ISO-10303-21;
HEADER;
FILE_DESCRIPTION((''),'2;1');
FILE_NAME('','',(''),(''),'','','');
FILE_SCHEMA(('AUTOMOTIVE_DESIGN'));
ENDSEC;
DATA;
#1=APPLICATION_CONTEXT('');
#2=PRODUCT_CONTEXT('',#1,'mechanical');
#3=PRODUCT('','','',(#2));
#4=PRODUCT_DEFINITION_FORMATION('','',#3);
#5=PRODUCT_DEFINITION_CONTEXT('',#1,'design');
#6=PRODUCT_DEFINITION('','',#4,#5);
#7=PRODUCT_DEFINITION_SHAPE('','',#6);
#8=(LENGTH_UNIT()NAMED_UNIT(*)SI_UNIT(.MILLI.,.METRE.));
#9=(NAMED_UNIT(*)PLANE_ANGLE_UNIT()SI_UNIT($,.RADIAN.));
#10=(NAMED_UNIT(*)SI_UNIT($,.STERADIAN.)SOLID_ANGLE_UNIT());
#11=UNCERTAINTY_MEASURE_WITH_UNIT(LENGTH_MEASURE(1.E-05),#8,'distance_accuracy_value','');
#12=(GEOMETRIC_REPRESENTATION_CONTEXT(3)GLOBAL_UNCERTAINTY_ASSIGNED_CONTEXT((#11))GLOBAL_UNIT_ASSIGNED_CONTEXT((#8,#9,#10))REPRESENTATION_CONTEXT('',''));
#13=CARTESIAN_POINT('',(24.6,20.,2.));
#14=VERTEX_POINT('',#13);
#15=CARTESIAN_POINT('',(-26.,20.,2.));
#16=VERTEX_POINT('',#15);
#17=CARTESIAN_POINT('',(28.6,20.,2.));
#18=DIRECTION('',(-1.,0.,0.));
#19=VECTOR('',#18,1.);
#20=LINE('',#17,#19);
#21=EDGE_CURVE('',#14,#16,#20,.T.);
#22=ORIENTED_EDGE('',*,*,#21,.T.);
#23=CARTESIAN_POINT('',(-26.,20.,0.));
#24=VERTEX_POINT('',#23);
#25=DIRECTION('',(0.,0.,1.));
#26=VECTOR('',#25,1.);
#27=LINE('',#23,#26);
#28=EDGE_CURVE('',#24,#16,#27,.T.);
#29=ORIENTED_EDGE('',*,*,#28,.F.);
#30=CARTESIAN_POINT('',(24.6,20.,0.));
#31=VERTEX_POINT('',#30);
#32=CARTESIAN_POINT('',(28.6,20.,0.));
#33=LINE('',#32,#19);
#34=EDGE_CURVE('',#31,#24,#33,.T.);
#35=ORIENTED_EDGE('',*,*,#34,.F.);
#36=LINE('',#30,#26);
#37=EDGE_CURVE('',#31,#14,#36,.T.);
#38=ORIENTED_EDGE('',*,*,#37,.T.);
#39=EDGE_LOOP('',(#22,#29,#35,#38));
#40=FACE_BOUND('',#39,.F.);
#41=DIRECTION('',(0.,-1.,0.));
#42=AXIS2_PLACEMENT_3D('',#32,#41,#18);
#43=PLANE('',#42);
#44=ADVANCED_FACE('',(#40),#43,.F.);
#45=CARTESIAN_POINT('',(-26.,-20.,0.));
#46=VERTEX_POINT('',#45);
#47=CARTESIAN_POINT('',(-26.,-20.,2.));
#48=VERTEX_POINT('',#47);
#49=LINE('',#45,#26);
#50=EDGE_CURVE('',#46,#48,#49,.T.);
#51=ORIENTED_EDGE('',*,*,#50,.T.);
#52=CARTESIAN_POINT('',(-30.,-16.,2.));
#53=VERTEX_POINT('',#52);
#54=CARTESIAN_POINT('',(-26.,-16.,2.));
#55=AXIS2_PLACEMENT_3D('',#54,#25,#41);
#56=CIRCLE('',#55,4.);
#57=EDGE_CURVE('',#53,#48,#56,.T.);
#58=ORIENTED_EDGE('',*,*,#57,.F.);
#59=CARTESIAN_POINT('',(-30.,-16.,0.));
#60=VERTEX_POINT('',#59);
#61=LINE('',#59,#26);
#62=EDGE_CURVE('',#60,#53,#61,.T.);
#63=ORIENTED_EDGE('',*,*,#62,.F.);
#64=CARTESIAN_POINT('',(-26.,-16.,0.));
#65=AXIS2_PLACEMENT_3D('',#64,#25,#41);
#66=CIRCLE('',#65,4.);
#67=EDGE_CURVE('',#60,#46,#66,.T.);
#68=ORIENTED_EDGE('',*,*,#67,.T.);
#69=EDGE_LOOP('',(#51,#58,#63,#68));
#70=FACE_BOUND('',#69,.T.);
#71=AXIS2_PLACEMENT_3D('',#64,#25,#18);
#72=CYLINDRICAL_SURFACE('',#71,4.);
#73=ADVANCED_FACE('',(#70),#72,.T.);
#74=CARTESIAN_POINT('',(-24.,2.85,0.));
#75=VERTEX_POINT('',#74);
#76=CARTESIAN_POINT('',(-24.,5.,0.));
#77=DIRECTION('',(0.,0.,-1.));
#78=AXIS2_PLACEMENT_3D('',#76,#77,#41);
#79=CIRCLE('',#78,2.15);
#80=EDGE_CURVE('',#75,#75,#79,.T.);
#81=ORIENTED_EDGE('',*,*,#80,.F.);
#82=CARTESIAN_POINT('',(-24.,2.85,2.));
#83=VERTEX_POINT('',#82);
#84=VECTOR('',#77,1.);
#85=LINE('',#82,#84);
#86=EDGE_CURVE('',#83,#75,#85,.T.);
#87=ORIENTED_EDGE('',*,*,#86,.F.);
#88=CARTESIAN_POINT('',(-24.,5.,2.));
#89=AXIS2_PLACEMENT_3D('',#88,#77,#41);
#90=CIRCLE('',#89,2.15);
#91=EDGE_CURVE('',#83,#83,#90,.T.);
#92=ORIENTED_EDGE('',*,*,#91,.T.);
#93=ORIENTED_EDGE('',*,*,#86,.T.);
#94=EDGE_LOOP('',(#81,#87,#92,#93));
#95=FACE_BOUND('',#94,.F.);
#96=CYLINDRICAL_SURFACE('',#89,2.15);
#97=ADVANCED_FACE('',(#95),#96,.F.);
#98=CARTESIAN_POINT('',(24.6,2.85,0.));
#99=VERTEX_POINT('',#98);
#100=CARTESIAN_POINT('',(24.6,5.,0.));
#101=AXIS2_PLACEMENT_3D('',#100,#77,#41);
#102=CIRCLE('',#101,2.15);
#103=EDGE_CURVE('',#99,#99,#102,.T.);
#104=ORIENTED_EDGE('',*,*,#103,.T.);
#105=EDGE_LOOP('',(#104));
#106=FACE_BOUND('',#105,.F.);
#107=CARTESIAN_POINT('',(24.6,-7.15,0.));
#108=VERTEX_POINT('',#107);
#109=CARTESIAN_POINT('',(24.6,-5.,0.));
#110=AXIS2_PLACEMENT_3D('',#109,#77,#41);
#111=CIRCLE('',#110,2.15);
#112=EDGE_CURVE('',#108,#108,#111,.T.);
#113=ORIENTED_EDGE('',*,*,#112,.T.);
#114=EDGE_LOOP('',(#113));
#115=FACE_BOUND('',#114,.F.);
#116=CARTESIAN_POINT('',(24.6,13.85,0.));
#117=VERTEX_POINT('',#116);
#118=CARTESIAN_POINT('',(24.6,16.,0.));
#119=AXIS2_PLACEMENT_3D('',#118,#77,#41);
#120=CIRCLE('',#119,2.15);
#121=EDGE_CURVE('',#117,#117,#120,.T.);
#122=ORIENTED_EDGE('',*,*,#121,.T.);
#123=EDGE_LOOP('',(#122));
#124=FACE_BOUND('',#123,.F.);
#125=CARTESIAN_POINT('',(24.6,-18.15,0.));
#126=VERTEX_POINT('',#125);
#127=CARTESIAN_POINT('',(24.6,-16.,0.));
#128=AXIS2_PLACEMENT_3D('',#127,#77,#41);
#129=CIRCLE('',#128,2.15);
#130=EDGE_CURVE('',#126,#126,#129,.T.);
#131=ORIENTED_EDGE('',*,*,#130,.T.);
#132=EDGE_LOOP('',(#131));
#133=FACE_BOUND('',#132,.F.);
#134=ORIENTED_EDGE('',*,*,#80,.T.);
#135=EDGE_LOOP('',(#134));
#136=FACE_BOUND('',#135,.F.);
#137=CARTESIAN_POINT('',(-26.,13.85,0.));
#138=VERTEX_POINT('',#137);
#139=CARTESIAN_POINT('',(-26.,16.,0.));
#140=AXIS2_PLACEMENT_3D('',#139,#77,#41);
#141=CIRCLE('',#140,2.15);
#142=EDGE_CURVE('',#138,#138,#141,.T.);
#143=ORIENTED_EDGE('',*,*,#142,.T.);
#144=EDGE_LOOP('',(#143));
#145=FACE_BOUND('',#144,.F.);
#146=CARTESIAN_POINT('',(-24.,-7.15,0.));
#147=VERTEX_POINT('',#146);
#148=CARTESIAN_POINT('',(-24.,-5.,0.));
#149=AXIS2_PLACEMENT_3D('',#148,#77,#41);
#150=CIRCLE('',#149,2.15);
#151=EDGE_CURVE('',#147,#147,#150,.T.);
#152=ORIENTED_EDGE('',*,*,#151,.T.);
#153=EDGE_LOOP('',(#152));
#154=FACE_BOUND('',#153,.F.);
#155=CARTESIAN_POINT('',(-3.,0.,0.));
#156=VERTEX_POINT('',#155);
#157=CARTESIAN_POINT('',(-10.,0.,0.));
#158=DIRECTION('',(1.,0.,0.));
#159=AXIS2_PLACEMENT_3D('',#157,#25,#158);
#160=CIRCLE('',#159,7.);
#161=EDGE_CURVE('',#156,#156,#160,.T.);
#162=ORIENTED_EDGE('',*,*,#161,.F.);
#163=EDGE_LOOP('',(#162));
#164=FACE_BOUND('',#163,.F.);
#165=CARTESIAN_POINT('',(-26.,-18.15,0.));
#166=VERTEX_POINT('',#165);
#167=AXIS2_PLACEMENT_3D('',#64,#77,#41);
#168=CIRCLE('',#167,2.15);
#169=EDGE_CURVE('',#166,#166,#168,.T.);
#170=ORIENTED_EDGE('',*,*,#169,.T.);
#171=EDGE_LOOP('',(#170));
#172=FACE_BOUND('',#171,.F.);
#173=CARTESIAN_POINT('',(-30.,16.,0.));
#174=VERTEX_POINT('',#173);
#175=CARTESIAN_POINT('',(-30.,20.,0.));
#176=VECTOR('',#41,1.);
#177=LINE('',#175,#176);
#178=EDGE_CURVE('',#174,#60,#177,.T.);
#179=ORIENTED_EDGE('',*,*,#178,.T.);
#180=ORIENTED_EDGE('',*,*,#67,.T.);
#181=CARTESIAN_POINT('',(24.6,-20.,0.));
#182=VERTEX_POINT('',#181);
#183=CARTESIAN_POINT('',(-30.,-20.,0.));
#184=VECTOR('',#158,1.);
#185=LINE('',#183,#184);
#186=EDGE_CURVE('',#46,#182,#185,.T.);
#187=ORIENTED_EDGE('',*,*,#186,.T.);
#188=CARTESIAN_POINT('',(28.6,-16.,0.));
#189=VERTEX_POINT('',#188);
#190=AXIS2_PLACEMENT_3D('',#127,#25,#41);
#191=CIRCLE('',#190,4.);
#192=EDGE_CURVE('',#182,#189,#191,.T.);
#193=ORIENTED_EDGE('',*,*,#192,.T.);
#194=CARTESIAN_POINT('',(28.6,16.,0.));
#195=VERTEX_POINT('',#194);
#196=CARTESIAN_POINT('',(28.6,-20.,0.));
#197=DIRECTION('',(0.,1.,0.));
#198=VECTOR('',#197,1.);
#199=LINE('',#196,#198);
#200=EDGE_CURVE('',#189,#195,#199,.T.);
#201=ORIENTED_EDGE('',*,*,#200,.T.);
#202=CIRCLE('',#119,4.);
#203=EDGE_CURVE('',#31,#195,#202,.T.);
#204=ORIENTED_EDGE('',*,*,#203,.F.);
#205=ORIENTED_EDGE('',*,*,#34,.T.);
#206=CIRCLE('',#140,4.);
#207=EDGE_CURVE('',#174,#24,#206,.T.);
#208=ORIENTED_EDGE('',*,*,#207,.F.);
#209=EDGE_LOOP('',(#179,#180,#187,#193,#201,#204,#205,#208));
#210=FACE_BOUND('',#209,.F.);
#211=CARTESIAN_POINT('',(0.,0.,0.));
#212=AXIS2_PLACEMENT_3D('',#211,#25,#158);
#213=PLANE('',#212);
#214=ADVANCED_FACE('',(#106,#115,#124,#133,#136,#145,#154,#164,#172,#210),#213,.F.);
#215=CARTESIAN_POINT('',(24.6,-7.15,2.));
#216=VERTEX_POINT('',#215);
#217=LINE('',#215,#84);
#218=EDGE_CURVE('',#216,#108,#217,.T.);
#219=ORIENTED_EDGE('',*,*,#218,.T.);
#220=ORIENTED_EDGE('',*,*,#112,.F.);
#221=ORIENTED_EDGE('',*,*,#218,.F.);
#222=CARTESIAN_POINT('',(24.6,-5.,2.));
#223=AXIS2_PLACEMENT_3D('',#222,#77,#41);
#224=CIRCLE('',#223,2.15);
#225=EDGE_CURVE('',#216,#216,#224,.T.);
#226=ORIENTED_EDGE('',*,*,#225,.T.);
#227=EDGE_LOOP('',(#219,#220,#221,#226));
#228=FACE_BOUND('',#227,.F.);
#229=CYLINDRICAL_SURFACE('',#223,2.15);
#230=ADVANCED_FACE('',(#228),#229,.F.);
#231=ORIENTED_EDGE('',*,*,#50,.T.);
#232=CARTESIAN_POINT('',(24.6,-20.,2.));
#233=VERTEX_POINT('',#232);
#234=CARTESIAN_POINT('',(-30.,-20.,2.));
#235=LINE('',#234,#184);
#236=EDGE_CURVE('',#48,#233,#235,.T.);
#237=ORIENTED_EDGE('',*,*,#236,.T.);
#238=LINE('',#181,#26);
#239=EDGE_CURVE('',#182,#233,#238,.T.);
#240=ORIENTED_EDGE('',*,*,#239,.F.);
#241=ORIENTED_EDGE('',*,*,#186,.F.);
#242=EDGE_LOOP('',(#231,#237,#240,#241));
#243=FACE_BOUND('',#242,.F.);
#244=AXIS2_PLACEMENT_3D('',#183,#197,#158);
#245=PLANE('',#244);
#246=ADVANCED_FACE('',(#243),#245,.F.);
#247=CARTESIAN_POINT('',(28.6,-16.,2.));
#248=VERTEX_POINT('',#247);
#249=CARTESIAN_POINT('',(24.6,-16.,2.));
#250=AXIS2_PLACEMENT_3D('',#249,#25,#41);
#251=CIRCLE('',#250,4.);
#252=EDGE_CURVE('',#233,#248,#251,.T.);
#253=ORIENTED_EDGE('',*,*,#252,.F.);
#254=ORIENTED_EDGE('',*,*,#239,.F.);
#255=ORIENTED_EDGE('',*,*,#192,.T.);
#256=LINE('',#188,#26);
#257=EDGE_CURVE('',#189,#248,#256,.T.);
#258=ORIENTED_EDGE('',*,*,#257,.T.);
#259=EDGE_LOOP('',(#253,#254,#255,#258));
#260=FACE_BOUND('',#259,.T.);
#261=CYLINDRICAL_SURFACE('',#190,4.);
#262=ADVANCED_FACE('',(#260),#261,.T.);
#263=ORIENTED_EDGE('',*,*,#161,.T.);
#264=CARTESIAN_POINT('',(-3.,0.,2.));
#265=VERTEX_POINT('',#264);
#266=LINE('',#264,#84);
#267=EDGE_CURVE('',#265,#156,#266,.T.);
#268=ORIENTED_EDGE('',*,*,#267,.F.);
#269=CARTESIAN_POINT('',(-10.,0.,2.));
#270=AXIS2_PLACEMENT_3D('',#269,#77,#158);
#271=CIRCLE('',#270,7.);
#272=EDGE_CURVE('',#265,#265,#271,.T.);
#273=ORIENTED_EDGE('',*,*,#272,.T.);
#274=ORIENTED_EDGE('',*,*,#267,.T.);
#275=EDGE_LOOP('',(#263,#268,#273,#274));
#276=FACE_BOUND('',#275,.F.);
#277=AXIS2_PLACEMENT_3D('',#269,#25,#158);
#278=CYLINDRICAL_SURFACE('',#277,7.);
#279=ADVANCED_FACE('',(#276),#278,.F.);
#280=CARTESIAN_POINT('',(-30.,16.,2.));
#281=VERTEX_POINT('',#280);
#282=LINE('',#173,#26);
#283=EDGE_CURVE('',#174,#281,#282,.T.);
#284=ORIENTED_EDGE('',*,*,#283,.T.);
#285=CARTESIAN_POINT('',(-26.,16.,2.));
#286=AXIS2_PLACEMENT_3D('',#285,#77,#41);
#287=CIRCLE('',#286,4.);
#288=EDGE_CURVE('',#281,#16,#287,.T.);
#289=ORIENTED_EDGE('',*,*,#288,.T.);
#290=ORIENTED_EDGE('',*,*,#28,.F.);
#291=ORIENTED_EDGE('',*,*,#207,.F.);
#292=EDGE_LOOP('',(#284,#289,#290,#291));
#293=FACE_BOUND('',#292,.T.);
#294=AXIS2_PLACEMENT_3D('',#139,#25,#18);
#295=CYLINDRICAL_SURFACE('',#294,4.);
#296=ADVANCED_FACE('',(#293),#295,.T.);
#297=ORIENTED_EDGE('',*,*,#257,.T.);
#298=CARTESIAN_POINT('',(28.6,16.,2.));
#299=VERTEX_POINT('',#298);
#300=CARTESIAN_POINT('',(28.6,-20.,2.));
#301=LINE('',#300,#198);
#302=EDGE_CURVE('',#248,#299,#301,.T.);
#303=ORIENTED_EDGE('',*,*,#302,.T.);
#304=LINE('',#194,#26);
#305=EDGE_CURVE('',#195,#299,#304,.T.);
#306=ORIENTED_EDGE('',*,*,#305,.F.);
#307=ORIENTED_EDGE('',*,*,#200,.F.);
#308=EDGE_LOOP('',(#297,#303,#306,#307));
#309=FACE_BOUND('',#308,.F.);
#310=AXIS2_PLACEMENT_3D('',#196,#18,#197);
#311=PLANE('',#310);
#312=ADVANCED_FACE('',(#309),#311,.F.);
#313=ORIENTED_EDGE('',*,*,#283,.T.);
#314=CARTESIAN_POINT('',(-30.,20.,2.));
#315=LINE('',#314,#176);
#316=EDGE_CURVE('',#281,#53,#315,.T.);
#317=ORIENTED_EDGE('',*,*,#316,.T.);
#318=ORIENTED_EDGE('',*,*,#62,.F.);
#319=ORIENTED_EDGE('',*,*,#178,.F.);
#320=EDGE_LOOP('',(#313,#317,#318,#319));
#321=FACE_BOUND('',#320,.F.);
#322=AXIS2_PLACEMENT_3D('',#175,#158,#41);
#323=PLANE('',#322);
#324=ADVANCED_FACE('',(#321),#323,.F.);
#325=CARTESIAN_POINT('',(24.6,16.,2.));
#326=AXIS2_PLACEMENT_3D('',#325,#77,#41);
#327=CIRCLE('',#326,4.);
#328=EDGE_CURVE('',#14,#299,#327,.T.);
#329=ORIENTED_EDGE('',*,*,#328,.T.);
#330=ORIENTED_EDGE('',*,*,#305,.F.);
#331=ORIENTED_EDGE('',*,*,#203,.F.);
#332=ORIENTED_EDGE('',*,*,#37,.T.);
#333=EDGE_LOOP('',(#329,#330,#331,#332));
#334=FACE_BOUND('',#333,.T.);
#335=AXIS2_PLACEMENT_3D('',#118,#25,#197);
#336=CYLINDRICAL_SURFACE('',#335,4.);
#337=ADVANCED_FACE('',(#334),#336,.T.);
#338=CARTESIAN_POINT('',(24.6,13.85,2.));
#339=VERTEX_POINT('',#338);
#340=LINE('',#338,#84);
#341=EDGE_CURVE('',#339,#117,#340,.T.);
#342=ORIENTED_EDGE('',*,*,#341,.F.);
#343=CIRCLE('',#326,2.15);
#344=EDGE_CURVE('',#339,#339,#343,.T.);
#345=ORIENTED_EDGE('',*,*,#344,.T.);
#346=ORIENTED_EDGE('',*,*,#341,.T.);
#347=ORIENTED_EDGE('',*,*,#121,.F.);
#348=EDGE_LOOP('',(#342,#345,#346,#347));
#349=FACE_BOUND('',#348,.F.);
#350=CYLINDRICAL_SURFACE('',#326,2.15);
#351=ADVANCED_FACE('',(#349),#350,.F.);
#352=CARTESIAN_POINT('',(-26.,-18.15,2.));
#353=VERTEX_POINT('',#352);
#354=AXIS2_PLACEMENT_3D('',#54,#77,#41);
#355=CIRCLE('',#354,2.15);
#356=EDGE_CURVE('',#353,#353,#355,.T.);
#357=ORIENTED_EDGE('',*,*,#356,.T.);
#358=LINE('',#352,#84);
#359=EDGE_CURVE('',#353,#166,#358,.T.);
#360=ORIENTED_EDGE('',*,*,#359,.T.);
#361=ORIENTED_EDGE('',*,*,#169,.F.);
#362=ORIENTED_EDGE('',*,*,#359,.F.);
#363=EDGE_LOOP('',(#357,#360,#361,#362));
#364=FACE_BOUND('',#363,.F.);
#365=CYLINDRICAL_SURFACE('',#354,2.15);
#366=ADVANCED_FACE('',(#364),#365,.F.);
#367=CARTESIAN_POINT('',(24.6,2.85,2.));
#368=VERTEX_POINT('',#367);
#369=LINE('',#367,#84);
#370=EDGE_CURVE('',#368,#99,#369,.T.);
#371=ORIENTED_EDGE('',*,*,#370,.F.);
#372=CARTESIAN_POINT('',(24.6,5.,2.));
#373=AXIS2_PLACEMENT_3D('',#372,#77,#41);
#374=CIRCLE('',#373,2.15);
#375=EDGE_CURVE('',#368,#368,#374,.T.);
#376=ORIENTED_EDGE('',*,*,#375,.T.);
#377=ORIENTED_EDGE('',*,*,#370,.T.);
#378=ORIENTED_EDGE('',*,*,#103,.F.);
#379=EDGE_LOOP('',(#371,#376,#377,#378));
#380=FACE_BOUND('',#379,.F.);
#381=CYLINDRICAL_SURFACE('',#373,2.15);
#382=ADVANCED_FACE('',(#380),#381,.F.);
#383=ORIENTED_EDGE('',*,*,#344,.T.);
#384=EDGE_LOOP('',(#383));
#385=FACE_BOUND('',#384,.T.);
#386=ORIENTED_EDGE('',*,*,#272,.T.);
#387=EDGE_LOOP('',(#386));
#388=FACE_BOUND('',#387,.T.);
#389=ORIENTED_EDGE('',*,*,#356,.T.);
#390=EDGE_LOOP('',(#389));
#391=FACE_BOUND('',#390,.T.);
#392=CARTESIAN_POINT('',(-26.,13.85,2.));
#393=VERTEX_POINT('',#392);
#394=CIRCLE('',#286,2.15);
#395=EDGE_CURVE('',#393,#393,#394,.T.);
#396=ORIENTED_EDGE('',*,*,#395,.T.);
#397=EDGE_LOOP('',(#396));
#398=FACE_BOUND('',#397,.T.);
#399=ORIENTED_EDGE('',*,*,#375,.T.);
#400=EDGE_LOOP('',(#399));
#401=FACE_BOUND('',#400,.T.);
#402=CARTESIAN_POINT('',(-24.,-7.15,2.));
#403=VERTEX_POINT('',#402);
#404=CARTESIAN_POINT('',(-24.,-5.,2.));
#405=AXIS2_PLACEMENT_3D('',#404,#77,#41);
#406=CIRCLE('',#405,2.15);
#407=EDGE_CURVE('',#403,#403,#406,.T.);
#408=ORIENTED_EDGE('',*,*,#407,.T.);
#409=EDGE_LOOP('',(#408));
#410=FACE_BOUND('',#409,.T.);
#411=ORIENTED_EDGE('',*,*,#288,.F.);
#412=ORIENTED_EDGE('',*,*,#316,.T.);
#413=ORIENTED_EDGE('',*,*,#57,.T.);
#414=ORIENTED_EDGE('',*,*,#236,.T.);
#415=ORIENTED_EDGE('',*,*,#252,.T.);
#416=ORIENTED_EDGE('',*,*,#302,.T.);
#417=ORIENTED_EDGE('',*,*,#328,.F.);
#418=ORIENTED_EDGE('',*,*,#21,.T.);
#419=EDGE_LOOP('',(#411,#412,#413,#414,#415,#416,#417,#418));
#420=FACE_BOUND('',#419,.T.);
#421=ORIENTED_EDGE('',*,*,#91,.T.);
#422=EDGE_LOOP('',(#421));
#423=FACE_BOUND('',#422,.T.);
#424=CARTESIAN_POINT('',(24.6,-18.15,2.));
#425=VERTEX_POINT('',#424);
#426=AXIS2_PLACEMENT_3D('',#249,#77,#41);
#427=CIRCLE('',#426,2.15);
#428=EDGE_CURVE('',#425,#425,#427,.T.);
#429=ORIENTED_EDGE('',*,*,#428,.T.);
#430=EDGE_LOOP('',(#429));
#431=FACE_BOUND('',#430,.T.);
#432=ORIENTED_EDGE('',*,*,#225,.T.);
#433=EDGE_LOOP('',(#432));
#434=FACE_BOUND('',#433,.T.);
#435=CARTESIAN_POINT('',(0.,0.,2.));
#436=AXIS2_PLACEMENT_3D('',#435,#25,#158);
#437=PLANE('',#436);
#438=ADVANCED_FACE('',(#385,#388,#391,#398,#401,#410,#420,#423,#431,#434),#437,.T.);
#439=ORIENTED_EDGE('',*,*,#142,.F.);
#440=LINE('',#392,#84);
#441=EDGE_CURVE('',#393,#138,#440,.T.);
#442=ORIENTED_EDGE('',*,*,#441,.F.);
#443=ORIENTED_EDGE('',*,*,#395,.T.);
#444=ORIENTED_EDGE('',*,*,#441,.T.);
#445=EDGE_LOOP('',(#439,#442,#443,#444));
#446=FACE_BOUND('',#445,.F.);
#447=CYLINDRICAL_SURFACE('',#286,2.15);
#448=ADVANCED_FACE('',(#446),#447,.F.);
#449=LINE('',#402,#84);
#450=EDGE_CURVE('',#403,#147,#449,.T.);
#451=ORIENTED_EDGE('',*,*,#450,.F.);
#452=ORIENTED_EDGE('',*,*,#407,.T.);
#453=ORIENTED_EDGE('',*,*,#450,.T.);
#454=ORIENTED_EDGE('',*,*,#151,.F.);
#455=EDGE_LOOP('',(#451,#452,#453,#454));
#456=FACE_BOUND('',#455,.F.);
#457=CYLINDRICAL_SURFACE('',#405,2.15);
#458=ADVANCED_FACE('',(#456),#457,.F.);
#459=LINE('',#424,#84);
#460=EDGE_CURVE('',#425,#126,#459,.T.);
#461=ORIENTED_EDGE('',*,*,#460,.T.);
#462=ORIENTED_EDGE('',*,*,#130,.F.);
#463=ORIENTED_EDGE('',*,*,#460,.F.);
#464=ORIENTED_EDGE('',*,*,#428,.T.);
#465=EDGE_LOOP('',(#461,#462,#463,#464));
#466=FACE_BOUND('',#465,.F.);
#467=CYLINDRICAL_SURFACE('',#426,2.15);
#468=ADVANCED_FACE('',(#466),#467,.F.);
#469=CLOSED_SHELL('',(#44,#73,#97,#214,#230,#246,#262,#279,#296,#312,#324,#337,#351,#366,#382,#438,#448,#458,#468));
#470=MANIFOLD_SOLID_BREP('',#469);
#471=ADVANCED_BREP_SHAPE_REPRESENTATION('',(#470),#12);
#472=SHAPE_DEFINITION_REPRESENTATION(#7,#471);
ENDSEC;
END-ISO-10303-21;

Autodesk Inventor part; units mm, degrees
ref_plane "YZ Plane" through (0, 0, 0) normal (1, 0, 0) x (0, 1, 0)
ref_plane "XZ Plane" through (0, 0, 0) normal (0, 1, 0) x (-1, 0, 0)
ref_plane "XY Plane" through (0, 0, 0) normal (0, 0, 1) x (1, 0, 0)
sketch "スケッチ1" plane through (0, 0, 0) normal (0, 0, 1) x (1, 0, 0)
  line L0 (-30, -20) -> (28.6, -20)
  line L1 (28.6, -20) -> (28.6, 20)
  line L2 (28.6, 20) -> (-30, 20)
  line L3 (-30, 20) -> (-30, -20)
  point P0 (0, 0)
  dimension "d1" = 40
  dimension "d28" = 30
  dimension "d29" = 28.6
  dimension "d32" = 20
extrude "プレート1" add sketch "スケッチ1" along normal blind 2
sketch "スケッチ2" plane through (0, 0, 2) normal (0, 0, 1) x (1, 0, 0)
  line L0 (-24, -5) -> (24.6, -5)
  line L1 (24.6, -5) -> (24.6, 5)
  line L2 (24.6, 5) -> (-24, 5)
  line L3 (-24, 5) -> (-24, -5)
  line L4 (-24, -5) -> (24.6, 5) construction
  line L5 (24.6, -5) -> (-24, 5) construction
  line L6 (28.6, -20) -> (-30, -20) projected
  line L7 (-30, -20) -> (-30, 20) projected
  line L8 (28.6, -20) -> (-30, -20) projected
  line L9 (28.6, 20) -> (28.6, -20) projected
  line L10 (-30, 20) -> (28.6, 20) projected
  circle A0 centre (-10, 0) radius 7
  point P0 (0.3, 0)
  point P1 (0.3, 0)
  point P2 (0.3, 0)
  point P3 (0, 0)
  dimension "d3" = 48.6
  dimension "d5" = 10
  dimension "d8" = 20
  dimension "d16" = 14
  dimension "d30" = 20
  dimension "d31" = 14
hole "穴1" at (24.6, 5, 2) at (24.6, -5, 2) at (-24, 5, 2) at (-24, -5, 2) direction (0, 0, -1) diameter 4.3 end through all clearance for "Socket Head Cap Screw" size "M4" standard "Ansi Metric M Profile"
extrude "押し出し1" cut sketch "スケッチ2" against normal blind 10 contours A0 L2 L0 | L0 A0 | A0 L2
sketch "スケッチ3" plane through (0, 0, 2) normal (0, 0, 1) x (1, 0, 0)
  line L0 (-30, 20) -> (28.6, 20) projected
  line L1 (-30, -20) -> (-30, 20) projected
  line L2 (28.6, -20) -> (-30, -20) projected
  line L3 (28.6, 20) -> (28.6, -20) projected
  line L4 (24.6, 16) -> (-26, 16)
  line L5 (-26, 16) -> (-26, -16)
  line L6 (-26, -16) -> (24.6, -16)
  line L7 (24.6, -16) -> (24.6, 16)
  point P0 (0, 0)
  dimension "d19" = 4
hole "穴2" at (-26, 16, 2) at (-26, -16, 2) at (24.6, 16, 2) at (24.6, -16, 2) direction (0, 0, -1) diameter 4.3 end through all clearance for "Socket Head Cap Screw" size "M4" standard "Ansi Metric M Profile"
fillet "コーナーR1" radius 4 4 edges at (28.6, 20, 1) (-30, 20, 1) (-30, -20, 1) (28.6, -20, 1)
equation "\"d14\" = Thickness"
equation "\"d2\" = Thickness"
equation "\"BendRadius\" = Thickness"
equation "\"BendReliefWidth\" = Thickness"
equation "\"BendReliefDepth\" = 0.5 * Thickness"
equation "\"CornerReliefSize\" = 4 * Thickness"
equation "\"MinimumRemnant\" = 2 * Thickness"
equation "\"TransitionRadius\" = BendRadius"
equation "\"JacobiRadiusSize\" = BendRadius"
equation "\"GapSize\" = Thickness"
equation "\"Thickness\" = 2"
properties part number "s_carbon_plate4" material "CFRP"
